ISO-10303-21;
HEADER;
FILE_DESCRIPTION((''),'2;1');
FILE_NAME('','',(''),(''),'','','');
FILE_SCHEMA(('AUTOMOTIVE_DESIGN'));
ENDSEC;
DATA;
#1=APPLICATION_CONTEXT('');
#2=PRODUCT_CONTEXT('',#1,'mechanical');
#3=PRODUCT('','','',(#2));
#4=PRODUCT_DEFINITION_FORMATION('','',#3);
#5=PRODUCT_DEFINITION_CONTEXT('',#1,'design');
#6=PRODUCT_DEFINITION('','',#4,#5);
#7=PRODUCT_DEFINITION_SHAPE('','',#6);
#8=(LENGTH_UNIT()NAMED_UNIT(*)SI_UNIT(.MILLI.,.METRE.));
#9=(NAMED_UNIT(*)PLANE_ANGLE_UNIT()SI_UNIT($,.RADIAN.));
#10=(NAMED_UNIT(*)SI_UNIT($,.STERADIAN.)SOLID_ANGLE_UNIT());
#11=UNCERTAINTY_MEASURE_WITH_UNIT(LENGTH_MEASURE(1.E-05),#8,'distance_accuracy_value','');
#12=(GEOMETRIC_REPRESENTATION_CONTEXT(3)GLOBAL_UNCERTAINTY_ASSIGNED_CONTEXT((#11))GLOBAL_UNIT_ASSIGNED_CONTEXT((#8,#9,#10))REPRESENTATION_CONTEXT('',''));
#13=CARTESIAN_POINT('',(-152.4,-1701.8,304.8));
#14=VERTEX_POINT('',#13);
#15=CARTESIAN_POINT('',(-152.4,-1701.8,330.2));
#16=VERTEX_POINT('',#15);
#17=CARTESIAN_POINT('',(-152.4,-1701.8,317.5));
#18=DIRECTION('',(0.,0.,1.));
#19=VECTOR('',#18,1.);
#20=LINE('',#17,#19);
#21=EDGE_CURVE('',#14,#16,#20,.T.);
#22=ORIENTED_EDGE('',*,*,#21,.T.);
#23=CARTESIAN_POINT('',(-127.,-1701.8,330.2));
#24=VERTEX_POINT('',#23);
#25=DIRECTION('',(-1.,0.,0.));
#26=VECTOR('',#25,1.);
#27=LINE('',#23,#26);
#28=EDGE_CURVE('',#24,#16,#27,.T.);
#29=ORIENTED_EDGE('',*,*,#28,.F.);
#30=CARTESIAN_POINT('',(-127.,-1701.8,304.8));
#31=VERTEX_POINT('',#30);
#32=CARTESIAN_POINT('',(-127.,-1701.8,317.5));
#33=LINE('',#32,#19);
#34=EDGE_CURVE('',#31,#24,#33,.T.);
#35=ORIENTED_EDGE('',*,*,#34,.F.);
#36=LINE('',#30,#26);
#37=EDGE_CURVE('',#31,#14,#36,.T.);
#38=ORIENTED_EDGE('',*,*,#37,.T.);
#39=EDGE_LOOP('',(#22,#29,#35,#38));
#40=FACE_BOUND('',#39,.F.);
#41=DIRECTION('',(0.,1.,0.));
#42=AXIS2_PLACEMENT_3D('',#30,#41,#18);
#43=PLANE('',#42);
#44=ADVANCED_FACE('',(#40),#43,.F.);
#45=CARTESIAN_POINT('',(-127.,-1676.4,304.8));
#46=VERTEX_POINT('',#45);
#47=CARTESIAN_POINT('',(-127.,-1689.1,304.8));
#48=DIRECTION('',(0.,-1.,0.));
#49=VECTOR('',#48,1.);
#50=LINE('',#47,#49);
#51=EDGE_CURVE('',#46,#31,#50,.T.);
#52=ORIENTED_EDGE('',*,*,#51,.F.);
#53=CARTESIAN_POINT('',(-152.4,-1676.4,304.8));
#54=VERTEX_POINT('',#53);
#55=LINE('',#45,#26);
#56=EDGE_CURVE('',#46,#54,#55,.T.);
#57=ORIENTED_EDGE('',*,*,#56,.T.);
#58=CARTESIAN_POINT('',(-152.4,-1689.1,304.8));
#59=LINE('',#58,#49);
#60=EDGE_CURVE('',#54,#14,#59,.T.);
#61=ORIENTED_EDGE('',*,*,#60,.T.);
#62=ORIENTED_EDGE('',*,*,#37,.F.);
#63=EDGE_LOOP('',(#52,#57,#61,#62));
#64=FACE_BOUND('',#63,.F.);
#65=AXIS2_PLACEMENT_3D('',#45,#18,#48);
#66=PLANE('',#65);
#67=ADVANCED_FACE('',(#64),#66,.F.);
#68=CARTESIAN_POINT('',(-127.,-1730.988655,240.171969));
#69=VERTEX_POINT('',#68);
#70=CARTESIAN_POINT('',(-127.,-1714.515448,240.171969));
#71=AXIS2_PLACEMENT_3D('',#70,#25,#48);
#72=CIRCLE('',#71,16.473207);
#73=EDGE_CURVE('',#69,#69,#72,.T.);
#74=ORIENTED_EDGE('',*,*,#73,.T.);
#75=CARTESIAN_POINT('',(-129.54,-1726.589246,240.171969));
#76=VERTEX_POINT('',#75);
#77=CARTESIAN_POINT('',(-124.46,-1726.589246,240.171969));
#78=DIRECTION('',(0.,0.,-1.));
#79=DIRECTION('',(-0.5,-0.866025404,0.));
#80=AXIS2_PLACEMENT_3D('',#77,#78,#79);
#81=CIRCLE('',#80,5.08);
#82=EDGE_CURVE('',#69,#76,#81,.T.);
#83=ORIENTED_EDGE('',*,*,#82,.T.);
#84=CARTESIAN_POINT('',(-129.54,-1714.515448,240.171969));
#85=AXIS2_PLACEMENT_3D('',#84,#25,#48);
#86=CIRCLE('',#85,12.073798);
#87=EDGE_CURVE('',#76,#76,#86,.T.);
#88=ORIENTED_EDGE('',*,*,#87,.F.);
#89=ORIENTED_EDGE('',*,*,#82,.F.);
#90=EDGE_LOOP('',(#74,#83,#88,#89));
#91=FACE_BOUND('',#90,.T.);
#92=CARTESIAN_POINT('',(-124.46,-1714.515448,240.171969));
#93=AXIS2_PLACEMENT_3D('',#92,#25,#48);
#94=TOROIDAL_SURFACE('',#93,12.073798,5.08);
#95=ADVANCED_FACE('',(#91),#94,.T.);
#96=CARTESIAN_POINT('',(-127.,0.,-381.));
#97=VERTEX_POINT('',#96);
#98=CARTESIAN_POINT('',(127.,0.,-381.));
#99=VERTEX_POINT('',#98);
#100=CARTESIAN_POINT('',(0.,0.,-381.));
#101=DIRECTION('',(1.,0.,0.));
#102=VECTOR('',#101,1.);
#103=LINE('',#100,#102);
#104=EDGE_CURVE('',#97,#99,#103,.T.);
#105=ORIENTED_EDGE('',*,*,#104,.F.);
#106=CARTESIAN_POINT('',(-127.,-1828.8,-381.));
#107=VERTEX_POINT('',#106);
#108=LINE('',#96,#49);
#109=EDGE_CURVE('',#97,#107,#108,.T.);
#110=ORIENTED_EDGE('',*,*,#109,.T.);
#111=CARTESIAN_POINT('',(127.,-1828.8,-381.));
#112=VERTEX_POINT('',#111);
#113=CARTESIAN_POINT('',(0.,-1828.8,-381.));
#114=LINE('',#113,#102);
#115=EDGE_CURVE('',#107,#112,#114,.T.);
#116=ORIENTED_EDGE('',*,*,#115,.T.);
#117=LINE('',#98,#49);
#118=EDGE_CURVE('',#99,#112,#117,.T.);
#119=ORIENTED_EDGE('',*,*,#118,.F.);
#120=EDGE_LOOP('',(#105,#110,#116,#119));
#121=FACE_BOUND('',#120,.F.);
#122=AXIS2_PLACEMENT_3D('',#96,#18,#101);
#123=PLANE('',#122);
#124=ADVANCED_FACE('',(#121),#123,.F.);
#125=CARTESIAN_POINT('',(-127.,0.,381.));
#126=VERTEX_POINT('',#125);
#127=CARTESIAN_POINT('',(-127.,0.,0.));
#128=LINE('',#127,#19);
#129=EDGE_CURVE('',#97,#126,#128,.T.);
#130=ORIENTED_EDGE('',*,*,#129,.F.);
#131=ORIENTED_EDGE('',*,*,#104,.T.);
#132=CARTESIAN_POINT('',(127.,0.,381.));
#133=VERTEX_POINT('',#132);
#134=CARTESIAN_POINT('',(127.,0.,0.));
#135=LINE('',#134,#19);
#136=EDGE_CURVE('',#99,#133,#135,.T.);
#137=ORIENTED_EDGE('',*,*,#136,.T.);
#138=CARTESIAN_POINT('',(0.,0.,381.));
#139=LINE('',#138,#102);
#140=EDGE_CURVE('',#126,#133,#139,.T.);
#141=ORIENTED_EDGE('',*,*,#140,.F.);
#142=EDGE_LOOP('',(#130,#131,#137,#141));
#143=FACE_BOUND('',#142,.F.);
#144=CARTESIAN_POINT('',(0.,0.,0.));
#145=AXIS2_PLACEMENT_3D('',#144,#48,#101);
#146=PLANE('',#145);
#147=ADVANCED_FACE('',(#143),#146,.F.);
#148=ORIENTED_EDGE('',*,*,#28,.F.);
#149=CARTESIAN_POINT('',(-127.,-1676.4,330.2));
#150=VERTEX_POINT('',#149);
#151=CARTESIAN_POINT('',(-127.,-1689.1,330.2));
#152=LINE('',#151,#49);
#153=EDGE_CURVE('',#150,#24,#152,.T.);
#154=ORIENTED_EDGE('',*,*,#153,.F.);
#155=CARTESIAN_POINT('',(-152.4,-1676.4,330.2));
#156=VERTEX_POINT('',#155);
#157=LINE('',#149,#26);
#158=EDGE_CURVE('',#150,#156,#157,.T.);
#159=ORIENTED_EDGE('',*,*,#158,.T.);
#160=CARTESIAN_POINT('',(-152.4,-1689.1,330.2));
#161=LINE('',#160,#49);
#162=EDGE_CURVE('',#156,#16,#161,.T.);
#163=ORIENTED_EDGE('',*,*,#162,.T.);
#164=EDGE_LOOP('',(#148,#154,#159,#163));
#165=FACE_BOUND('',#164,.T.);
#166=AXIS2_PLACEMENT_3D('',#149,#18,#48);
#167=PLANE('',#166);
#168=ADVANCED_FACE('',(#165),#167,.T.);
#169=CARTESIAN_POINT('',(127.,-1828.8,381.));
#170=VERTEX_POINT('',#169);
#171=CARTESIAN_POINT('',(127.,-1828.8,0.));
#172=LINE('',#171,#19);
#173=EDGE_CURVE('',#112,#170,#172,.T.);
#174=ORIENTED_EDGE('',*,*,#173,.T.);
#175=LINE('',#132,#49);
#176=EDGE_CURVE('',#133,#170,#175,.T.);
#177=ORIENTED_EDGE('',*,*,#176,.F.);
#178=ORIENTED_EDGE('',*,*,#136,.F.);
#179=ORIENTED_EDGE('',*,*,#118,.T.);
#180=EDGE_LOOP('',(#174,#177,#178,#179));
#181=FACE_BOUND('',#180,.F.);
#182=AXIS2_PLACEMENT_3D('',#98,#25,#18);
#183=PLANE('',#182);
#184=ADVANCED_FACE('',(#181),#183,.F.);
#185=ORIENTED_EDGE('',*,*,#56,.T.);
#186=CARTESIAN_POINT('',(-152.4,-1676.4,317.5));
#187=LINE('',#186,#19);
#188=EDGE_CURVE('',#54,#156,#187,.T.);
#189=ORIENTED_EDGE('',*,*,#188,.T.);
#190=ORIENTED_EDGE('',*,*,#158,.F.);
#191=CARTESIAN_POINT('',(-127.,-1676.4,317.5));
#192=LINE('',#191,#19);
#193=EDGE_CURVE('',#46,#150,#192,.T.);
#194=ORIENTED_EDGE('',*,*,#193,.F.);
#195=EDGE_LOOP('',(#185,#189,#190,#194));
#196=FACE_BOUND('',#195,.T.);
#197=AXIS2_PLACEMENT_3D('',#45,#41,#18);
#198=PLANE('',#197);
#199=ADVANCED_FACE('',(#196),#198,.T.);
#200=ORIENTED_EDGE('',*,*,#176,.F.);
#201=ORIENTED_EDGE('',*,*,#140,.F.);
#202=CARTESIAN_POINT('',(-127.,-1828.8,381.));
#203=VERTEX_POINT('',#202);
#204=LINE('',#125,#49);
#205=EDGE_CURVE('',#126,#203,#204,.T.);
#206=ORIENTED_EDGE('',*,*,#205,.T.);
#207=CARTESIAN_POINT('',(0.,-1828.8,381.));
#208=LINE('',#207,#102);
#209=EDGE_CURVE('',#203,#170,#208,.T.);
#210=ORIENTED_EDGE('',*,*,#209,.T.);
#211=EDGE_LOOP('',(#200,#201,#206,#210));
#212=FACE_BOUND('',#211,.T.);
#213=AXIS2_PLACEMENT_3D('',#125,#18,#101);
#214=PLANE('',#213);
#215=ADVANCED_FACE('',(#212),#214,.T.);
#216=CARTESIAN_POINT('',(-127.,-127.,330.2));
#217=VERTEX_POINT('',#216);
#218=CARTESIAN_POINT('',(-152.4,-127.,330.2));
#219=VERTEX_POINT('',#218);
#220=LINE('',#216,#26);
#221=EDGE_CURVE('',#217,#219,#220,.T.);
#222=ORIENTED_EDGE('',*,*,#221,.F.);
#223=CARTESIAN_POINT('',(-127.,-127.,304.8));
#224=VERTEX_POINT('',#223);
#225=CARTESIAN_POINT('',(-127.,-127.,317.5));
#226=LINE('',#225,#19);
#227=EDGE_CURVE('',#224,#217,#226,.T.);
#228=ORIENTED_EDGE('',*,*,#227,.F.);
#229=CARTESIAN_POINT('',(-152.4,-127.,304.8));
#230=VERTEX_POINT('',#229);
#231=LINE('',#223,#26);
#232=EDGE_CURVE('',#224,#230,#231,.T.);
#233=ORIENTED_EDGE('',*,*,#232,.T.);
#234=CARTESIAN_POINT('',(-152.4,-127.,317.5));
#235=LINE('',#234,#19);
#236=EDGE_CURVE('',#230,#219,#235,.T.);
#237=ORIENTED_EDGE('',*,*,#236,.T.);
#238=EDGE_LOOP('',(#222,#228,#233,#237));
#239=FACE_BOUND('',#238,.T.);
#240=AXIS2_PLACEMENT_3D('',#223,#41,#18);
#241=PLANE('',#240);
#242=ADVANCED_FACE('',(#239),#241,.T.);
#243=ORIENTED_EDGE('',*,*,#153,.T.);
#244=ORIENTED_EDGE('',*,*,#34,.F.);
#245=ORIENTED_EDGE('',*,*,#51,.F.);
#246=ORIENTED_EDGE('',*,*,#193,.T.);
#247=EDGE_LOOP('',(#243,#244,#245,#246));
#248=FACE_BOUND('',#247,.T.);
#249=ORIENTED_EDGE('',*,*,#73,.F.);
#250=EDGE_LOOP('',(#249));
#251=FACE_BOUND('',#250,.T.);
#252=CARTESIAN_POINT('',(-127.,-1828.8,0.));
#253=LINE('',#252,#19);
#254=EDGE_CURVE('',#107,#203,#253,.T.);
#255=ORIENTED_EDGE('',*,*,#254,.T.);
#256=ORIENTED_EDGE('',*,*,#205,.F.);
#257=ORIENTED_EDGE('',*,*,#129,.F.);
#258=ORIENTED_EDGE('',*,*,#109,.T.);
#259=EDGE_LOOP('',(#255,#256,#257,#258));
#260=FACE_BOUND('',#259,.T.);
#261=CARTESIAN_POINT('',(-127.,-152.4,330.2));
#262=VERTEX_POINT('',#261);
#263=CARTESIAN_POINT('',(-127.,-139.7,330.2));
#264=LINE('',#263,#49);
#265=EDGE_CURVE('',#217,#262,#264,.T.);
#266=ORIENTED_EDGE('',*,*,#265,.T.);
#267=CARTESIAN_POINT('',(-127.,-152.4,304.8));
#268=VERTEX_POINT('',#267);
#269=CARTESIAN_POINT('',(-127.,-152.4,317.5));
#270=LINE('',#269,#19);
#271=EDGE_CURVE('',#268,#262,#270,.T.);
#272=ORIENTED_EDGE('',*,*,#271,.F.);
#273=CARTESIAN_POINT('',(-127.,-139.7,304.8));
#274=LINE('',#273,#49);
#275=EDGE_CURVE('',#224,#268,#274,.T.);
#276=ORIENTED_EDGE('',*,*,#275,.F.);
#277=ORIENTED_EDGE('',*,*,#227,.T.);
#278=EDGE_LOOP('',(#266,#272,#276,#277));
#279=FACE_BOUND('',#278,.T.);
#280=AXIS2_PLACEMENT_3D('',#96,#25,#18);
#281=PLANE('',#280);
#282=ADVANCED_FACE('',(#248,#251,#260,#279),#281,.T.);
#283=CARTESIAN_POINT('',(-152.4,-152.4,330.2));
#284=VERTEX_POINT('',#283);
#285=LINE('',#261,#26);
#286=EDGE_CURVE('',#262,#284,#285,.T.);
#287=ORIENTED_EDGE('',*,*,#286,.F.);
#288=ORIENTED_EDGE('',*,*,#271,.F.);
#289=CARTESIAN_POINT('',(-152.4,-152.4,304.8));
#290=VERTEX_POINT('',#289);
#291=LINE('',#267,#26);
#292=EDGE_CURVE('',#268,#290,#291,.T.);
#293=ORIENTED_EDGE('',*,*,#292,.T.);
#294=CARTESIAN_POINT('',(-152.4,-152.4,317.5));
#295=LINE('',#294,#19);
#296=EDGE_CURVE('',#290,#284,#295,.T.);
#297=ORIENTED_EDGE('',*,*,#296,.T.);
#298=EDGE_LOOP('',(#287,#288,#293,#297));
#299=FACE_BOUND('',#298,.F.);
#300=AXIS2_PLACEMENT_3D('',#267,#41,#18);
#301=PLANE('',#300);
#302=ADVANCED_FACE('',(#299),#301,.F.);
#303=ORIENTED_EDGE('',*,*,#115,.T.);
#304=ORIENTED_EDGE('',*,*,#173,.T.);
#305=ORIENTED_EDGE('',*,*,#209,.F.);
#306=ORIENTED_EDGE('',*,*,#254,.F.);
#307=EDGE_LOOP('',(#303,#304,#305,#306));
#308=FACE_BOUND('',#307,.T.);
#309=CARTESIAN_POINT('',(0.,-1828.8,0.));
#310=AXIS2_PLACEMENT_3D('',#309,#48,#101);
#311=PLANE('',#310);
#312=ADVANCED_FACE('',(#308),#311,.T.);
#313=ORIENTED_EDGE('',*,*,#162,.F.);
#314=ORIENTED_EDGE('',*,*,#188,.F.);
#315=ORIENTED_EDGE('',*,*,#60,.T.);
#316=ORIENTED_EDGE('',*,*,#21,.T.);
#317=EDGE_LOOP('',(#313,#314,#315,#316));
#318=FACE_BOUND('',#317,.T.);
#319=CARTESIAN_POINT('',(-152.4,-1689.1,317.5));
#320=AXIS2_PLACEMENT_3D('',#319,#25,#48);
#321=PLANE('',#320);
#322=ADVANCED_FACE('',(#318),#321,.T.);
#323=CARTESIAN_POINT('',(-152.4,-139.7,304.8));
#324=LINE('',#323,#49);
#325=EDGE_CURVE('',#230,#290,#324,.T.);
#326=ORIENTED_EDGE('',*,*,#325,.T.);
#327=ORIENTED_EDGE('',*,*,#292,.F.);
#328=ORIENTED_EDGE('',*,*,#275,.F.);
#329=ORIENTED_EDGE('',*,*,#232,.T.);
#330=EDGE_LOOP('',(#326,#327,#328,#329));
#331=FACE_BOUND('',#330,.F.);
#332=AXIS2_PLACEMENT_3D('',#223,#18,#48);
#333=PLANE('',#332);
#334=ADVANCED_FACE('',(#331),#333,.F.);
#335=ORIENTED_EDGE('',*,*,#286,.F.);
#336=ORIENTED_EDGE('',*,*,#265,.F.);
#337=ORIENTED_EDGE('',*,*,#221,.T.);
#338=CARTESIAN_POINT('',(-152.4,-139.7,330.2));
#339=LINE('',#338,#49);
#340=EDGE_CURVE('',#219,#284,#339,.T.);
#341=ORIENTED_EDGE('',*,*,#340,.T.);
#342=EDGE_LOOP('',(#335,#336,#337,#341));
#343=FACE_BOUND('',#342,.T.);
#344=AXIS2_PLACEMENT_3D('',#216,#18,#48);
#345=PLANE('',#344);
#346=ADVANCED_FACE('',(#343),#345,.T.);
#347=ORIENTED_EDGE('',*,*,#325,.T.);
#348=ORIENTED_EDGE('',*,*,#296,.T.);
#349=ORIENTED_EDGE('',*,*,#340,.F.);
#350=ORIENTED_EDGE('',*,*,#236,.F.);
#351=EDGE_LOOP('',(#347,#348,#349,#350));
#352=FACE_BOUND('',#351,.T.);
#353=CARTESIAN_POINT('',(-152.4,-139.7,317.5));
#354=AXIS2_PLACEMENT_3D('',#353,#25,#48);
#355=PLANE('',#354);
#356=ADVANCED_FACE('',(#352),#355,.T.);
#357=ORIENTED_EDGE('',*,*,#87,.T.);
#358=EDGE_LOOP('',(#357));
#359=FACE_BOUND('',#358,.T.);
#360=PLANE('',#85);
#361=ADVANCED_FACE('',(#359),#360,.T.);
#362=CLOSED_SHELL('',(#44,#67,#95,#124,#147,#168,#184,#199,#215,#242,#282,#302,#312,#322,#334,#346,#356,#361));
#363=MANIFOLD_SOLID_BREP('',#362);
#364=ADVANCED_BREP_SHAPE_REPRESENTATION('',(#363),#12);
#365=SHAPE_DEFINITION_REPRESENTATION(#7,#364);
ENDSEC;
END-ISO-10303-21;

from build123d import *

# Parameters (mm, degrees)
F0_W     = 254
F0_H     = 762
F1_DEPTH = 1828.8
F2_W     = 25.4
F2_H     = 25.4
F3_DEPTH = 25.4
F4_R     = 16.4732072573
F5_DEPTH = 2.54


# Not quite as in the source:
# - a fillet or chamfer that OpenCascade refuses, or shapes differently, is made with other operations: its cross-section is extruded or revolved along the edge and cut away or added


with BuildPart() as f1:
    # F0 (on Front) → F1 (new body)
    with BuildSketch(Plane.XZ):
        Rectangle(F0_W, F0_H)
    extrude(amount=F1_DEPTH)

    # F2 (on face) → F3 (join)
    with BuildSketch(Plane(origin=(-127, 0, 0), x_dir=(0, -1, 0), z_dir=(-1, 0, 0))):
        with Locations((1689.1, 317.5)):
            Rectangle(F2_W, F2_H)
        with Locations((139.7, 317.5)):
            Rectangle(F2_W, F2_H)
    extrude(amount=F3_DEPTH)

    # F4 (on face) → F5 (join)
    with BuildSketch(Plane(origin=(-127, 0, 0), x_dir=(0, -1, 0), z_dir=(-1, 0, 0))):
        with Locations((1714.5154476166, 240.1719689369)):
            Circle(F4_R)
    extrude(amount=F5_DEPTH)

    # F6: fillet of radius 5.08 on 1 edges, made by hand

    # F6_s1 → F6_t2 (revolve, cut)
    with BuildSketch(Plane.XY.offset(240.1719689369)):
        with BuildLine():
            ThreePointArc((-127, -1730.9886548739), (-128.8594090512, -1729.1292458227), (-129.54, -1726.5892458227))
            Line((-129.54, -1726.5892458227), (-129.54, -1730.9886548739))
            Line((-129.54, -1730.9886548739), (-127, -1730.9886548739))
        make_face()
    revolve(axis=Axis((-129.54, -1714.5154476166, 240.1719689369), (-1, 0, 0)), mode=Mode.SUBTRACT)


solid = f1.part
